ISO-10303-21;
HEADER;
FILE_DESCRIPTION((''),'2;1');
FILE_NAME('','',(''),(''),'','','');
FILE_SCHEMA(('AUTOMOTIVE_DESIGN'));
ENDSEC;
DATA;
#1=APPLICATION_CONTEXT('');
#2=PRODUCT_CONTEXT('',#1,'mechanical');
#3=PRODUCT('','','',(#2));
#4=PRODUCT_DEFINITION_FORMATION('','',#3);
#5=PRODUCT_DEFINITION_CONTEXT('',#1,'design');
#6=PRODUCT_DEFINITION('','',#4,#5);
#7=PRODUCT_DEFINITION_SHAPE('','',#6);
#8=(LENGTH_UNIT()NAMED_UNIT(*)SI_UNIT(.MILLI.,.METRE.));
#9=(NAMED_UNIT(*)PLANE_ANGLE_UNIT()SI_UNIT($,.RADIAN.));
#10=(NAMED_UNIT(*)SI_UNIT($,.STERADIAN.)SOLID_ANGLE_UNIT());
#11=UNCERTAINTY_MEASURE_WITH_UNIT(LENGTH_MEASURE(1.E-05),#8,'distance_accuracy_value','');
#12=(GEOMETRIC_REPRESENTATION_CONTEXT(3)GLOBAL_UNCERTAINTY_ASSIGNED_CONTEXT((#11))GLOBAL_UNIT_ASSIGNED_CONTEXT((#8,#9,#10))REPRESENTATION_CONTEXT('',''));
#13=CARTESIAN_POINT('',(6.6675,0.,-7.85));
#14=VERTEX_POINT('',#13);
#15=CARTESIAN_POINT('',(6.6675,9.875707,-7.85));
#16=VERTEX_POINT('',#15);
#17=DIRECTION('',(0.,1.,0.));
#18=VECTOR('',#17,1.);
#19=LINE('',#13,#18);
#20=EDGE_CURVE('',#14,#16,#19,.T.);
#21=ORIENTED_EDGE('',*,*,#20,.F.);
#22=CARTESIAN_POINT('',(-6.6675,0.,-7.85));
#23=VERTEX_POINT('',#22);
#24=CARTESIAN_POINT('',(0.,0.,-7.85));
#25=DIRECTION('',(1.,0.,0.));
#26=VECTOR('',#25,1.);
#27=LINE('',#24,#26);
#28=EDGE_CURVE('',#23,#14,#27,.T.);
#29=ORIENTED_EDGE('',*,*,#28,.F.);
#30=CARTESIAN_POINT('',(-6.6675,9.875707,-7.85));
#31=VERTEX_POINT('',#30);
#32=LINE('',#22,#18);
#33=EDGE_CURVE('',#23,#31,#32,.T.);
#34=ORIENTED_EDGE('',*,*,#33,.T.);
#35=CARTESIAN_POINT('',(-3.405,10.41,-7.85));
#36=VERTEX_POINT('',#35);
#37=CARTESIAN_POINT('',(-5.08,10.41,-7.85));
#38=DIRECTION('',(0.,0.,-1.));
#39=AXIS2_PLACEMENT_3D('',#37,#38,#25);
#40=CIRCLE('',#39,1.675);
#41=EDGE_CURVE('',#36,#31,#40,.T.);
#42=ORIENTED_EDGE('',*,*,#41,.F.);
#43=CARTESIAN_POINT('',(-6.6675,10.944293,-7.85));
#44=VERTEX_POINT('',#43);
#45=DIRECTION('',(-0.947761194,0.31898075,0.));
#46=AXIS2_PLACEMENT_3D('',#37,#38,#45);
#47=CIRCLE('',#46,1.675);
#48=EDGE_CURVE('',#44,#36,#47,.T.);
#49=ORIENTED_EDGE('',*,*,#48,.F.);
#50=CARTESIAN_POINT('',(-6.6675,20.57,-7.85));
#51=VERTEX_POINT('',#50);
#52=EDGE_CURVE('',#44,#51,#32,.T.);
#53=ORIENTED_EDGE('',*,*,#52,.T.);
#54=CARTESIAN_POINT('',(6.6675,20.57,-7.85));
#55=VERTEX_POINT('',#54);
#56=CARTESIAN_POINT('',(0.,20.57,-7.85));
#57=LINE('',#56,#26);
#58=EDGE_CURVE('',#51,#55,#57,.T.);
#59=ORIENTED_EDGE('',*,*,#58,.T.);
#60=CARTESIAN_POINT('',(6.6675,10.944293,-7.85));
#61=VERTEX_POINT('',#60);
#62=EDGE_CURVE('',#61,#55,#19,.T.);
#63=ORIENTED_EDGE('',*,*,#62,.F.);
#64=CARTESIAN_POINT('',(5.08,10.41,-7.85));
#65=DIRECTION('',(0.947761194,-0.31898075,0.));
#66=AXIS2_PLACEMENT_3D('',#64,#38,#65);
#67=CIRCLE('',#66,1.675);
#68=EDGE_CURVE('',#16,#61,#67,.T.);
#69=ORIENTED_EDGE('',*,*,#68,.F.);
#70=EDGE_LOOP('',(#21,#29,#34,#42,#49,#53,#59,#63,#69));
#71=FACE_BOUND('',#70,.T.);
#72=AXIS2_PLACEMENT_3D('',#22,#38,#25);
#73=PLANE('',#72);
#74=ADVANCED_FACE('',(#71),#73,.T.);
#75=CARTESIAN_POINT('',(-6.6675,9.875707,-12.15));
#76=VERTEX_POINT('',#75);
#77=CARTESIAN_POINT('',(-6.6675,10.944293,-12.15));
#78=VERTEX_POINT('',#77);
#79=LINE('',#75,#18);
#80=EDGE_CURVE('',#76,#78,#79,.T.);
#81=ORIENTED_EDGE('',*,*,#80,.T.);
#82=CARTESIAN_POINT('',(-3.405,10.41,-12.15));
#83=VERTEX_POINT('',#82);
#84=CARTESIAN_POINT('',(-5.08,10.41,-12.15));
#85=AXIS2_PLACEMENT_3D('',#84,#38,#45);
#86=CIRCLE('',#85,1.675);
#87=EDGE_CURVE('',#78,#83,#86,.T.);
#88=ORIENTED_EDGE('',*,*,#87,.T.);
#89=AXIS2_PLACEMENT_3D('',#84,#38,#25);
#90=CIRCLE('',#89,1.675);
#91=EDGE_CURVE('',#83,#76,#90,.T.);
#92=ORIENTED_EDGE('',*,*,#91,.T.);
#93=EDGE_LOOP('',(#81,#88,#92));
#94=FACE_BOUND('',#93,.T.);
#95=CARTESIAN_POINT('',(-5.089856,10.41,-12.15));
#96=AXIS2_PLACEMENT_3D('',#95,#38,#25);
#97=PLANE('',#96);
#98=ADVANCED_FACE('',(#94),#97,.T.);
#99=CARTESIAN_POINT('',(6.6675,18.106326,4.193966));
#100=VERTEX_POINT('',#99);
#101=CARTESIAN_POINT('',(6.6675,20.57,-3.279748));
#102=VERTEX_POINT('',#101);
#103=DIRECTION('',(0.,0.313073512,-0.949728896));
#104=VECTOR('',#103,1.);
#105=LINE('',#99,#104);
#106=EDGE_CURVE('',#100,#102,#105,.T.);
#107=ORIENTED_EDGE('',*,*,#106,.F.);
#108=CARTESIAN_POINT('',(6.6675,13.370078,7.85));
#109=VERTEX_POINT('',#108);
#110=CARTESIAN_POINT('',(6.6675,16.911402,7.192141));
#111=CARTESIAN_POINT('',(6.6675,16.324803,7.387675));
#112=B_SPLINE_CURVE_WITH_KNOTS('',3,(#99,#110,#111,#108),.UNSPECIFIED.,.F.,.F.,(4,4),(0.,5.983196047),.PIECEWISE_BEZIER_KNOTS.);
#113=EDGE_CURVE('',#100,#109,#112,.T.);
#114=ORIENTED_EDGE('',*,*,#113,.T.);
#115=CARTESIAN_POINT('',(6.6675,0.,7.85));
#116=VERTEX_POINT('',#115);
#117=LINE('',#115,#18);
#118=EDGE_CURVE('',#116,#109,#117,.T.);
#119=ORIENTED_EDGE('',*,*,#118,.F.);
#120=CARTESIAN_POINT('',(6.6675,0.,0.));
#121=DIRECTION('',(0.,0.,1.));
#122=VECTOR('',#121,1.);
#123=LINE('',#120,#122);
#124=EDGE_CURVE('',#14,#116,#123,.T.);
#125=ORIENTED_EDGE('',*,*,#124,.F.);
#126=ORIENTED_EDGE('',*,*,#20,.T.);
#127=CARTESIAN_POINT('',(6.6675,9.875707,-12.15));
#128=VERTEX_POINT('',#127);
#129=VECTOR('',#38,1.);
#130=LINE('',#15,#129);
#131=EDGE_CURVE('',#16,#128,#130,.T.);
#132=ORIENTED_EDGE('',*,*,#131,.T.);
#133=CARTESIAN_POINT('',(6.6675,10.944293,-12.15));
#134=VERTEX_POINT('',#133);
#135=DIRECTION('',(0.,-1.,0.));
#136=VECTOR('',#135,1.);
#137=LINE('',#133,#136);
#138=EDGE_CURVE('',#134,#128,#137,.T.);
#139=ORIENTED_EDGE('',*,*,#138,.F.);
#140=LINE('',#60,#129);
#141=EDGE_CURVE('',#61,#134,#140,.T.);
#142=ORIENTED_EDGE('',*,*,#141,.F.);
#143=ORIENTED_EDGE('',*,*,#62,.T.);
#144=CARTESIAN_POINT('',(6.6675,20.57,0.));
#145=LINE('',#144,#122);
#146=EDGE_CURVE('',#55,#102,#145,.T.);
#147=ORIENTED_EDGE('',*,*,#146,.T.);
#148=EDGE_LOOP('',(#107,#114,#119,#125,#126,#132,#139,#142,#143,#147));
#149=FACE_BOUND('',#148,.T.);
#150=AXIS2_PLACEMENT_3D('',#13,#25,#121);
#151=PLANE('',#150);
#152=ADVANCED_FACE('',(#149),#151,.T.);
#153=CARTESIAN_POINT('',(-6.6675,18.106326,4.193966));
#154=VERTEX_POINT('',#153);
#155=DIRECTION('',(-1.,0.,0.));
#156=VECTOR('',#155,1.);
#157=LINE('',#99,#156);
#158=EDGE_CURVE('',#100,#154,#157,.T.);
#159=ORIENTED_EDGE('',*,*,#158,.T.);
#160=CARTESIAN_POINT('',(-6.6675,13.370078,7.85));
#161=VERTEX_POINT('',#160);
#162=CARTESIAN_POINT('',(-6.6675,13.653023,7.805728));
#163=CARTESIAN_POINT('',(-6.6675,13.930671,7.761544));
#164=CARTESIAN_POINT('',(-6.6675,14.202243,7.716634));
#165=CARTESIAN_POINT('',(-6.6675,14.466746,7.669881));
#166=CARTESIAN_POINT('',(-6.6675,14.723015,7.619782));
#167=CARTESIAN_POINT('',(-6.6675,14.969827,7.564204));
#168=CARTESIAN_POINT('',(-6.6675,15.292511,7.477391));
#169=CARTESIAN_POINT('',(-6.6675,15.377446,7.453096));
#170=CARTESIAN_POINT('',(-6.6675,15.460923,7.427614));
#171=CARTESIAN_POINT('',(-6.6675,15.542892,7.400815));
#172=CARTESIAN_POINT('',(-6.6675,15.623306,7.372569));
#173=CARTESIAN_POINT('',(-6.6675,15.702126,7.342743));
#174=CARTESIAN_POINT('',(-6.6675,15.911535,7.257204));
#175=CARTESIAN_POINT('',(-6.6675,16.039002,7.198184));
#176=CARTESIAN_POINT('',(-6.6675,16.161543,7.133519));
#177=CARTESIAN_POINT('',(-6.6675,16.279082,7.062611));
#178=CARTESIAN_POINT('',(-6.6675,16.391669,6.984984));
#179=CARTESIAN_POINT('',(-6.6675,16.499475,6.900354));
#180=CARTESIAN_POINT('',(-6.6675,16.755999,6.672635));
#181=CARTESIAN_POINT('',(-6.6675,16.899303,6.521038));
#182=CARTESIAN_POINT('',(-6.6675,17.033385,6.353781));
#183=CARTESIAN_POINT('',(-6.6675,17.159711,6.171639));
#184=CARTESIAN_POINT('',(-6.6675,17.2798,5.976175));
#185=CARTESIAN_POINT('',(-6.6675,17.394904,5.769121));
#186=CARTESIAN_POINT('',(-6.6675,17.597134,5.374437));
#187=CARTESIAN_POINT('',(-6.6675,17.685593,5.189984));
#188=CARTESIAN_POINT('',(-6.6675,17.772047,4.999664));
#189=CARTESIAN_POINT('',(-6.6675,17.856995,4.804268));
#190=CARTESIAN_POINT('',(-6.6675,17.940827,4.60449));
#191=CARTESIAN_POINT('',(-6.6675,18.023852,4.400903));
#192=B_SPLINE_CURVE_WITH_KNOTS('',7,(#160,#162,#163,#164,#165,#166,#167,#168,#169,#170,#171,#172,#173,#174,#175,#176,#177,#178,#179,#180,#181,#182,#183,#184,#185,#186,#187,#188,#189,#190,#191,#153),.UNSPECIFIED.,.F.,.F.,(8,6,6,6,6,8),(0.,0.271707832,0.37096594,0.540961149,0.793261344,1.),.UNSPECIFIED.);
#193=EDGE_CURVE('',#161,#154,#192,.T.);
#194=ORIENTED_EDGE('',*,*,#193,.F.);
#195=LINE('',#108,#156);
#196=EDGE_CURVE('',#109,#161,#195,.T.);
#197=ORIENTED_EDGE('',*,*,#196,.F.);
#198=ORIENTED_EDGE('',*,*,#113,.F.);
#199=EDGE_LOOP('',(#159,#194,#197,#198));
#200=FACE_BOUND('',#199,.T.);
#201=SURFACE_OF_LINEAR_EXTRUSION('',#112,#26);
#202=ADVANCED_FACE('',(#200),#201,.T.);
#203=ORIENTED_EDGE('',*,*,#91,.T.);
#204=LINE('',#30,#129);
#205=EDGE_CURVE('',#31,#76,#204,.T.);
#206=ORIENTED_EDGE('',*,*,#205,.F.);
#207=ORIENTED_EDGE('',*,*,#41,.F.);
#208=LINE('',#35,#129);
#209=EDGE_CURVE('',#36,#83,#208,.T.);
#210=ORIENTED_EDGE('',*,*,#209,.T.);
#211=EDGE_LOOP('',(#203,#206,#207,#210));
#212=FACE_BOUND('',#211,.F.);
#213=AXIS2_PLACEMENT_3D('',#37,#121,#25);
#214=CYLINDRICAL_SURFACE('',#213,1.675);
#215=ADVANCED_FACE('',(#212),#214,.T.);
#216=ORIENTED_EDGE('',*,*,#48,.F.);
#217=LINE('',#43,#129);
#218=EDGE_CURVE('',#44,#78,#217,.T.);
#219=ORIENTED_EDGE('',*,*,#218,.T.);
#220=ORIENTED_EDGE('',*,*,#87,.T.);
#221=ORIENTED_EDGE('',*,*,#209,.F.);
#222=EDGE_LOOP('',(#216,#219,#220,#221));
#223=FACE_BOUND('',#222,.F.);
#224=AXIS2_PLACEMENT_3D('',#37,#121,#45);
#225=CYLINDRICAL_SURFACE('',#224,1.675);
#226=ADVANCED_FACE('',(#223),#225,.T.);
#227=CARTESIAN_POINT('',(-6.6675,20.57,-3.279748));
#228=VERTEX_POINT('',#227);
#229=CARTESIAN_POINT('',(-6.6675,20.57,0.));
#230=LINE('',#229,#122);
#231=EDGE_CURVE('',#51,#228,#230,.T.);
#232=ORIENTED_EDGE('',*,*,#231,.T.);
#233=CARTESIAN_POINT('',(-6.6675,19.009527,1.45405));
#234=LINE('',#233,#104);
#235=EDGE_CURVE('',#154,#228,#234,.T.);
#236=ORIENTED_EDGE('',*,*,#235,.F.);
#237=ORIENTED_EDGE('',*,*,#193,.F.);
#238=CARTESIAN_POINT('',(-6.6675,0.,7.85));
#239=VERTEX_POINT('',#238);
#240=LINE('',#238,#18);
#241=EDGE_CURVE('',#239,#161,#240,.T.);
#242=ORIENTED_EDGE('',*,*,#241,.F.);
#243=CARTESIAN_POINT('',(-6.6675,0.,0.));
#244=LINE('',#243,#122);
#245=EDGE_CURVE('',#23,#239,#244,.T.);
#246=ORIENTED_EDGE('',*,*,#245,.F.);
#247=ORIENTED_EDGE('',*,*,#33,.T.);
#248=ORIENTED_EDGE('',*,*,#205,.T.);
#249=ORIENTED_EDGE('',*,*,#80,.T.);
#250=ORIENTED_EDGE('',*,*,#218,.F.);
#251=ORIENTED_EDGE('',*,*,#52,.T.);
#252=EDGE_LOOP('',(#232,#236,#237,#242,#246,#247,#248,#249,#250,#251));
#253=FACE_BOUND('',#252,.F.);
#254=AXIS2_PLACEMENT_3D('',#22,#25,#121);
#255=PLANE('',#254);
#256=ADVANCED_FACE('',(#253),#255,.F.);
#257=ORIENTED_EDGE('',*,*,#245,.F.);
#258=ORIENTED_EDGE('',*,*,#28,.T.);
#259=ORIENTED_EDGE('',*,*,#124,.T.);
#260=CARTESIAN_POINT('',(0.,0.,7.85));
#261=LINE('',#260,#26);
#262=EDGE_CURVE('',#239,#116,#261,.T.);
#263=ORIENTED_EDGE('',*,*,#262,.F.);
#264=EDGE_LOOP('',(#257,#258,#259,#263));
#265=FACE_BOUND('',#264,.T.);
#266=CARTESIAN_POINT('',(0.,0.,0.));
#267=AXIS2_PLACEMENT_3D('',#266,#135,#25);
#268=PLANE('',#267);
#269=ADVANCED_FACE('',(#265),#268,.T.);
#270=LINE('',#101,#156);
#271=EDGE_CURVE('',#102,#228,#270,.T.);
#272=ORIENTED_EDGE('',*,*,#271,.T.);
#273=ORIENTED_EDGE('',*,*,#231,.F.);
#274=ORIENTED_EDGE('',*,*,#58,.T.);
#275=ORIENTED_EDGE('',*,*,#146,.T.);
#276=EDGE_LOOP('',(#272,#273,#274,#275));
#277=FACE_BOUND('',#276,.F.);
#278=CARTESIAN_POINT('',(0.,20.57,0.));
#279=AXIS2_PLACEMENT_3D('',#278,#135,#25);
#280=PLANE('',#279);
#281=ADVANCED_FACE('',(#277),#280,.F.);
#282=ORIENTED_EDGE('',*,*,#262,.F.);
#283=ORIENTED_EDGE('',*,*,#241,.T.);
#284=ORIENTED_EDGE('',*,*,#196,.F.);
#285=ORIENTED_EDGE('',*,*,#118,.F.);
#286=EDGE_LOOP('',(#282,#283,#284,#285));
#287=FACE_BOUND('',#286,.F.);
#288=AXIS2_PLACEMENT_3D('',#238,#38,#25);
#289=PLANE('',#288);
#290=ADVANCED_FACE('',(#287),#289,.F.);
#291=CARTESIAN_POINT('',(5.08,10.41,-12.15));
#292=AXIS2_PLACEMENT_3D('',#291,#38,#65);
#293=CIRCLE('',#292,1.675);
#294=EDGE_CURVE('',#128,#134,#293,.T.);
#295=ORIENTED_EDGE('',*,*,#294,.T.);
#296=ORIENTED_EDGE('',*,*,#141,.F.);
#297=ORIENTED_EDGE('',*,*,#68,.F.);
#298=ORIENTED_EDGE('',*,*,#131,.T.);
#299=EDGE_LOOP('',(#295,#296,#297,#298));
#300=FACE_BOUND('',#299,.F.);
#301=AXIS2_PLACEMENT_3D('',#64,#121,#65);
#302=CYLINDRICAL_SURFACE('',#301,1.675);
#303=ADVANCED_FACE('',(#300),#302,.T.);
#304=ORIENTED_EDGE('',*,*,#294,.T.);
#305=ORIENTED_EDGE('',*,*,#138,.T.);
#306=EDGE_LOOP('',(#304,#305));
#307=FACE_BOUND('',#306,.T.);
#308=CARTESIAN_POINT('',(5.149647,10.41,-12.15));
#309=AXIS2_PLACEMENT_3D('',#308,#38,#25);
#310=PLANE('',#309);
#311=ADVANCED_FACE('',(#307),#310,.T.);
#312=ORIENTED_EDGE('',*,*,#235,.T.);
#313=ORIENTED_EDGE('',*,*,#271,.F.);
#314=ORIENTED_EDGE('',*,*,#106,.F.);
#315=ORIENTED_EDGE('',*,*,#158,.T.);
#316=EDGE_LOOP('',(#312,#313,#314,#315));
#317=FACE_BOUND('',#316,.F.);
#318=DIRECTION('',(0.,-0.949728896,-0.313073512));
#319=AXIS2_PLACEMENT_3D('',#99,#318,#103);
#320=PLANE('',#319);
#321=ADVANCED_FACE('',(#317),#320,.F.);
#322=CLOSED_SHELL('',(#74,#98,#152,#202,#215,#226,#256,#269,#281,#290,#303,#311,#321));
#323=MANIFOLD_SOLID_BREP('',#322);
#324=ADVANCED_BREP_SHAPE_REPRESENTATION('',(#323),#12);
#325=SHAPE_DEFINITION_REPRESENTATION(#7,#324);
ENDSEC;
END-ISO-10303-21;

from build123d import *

# Parameters (mm, degrees)
F0_W     = 13.335
F0_H     = 15.7
F1_DEPTH = 20.57
F3_DEPTH = 4.3
F5_DEPTH = 13.336


with BuildPart() as f1:
    # F0 (on Front) → F1 (new body)
    with BuildSketch(Plane.XZ):
        Rectangle(F0_W, F0_H)
    extrude(amount=-F1_DEPTH)

    # F2 (on face) → F3 (join)
    with BuildSketch(Plane(origin=(0, 0, -7.85), x_dir=(1, 0, 0), z_dir=(0, 0, -1))):
        with BuildLine():
            Line((6.6675, -10.9442927568), (6.6675, -9.8757072432))
            ThreePointArc((6.6675, -9.8757072432), (3.405, -10.41), (6.6675, -10.9442927568))
        make_face()
        with BuildLine():
            ThreePointArc((-3.405, -10.41), (-4.8092949022, -8.757019737), (-6.6675, -9.8757072432))
            Line((-6.6675, -9.8757072432), (-6.6675, -10.9442927568))
            ThreePointArc((-6.6675, -10.9442927568), (-4.8092949022, -12.062980263), (-3.405, -10.41))
        make_face()
    extrude(amount=F3_DEPTH)

    # F4 (on face) → F5 (cut, through all)
    with BuildSketch(Plane.YZ.offset(6.6675)):
        with BuildLine():
            Line((18.1063264608, 4.1939658113), (20.57, -3.2797483727))
            Line((20.57, -3.2797483727), (20.57, 7.85))
            Line((20.57, 7.85), (13.3700780571, 7.85))
            add(Edge.make_bspline(
                [(18.1063264608, 4.1939658113), (16.9114023447, 7.1921413764), (16.3248032331, 7.3876748793), (13.3700780571, 7.85)],
                knots=[0, 0, 0, 0, 5.9831960466, 5.9831960466, 5.9831960466, 5.9831960466], degree=3))
        make_face()
    extrude(amount=-F5_DEPTH, mode=Mode.SUBTRACT)


solid = f1.part
